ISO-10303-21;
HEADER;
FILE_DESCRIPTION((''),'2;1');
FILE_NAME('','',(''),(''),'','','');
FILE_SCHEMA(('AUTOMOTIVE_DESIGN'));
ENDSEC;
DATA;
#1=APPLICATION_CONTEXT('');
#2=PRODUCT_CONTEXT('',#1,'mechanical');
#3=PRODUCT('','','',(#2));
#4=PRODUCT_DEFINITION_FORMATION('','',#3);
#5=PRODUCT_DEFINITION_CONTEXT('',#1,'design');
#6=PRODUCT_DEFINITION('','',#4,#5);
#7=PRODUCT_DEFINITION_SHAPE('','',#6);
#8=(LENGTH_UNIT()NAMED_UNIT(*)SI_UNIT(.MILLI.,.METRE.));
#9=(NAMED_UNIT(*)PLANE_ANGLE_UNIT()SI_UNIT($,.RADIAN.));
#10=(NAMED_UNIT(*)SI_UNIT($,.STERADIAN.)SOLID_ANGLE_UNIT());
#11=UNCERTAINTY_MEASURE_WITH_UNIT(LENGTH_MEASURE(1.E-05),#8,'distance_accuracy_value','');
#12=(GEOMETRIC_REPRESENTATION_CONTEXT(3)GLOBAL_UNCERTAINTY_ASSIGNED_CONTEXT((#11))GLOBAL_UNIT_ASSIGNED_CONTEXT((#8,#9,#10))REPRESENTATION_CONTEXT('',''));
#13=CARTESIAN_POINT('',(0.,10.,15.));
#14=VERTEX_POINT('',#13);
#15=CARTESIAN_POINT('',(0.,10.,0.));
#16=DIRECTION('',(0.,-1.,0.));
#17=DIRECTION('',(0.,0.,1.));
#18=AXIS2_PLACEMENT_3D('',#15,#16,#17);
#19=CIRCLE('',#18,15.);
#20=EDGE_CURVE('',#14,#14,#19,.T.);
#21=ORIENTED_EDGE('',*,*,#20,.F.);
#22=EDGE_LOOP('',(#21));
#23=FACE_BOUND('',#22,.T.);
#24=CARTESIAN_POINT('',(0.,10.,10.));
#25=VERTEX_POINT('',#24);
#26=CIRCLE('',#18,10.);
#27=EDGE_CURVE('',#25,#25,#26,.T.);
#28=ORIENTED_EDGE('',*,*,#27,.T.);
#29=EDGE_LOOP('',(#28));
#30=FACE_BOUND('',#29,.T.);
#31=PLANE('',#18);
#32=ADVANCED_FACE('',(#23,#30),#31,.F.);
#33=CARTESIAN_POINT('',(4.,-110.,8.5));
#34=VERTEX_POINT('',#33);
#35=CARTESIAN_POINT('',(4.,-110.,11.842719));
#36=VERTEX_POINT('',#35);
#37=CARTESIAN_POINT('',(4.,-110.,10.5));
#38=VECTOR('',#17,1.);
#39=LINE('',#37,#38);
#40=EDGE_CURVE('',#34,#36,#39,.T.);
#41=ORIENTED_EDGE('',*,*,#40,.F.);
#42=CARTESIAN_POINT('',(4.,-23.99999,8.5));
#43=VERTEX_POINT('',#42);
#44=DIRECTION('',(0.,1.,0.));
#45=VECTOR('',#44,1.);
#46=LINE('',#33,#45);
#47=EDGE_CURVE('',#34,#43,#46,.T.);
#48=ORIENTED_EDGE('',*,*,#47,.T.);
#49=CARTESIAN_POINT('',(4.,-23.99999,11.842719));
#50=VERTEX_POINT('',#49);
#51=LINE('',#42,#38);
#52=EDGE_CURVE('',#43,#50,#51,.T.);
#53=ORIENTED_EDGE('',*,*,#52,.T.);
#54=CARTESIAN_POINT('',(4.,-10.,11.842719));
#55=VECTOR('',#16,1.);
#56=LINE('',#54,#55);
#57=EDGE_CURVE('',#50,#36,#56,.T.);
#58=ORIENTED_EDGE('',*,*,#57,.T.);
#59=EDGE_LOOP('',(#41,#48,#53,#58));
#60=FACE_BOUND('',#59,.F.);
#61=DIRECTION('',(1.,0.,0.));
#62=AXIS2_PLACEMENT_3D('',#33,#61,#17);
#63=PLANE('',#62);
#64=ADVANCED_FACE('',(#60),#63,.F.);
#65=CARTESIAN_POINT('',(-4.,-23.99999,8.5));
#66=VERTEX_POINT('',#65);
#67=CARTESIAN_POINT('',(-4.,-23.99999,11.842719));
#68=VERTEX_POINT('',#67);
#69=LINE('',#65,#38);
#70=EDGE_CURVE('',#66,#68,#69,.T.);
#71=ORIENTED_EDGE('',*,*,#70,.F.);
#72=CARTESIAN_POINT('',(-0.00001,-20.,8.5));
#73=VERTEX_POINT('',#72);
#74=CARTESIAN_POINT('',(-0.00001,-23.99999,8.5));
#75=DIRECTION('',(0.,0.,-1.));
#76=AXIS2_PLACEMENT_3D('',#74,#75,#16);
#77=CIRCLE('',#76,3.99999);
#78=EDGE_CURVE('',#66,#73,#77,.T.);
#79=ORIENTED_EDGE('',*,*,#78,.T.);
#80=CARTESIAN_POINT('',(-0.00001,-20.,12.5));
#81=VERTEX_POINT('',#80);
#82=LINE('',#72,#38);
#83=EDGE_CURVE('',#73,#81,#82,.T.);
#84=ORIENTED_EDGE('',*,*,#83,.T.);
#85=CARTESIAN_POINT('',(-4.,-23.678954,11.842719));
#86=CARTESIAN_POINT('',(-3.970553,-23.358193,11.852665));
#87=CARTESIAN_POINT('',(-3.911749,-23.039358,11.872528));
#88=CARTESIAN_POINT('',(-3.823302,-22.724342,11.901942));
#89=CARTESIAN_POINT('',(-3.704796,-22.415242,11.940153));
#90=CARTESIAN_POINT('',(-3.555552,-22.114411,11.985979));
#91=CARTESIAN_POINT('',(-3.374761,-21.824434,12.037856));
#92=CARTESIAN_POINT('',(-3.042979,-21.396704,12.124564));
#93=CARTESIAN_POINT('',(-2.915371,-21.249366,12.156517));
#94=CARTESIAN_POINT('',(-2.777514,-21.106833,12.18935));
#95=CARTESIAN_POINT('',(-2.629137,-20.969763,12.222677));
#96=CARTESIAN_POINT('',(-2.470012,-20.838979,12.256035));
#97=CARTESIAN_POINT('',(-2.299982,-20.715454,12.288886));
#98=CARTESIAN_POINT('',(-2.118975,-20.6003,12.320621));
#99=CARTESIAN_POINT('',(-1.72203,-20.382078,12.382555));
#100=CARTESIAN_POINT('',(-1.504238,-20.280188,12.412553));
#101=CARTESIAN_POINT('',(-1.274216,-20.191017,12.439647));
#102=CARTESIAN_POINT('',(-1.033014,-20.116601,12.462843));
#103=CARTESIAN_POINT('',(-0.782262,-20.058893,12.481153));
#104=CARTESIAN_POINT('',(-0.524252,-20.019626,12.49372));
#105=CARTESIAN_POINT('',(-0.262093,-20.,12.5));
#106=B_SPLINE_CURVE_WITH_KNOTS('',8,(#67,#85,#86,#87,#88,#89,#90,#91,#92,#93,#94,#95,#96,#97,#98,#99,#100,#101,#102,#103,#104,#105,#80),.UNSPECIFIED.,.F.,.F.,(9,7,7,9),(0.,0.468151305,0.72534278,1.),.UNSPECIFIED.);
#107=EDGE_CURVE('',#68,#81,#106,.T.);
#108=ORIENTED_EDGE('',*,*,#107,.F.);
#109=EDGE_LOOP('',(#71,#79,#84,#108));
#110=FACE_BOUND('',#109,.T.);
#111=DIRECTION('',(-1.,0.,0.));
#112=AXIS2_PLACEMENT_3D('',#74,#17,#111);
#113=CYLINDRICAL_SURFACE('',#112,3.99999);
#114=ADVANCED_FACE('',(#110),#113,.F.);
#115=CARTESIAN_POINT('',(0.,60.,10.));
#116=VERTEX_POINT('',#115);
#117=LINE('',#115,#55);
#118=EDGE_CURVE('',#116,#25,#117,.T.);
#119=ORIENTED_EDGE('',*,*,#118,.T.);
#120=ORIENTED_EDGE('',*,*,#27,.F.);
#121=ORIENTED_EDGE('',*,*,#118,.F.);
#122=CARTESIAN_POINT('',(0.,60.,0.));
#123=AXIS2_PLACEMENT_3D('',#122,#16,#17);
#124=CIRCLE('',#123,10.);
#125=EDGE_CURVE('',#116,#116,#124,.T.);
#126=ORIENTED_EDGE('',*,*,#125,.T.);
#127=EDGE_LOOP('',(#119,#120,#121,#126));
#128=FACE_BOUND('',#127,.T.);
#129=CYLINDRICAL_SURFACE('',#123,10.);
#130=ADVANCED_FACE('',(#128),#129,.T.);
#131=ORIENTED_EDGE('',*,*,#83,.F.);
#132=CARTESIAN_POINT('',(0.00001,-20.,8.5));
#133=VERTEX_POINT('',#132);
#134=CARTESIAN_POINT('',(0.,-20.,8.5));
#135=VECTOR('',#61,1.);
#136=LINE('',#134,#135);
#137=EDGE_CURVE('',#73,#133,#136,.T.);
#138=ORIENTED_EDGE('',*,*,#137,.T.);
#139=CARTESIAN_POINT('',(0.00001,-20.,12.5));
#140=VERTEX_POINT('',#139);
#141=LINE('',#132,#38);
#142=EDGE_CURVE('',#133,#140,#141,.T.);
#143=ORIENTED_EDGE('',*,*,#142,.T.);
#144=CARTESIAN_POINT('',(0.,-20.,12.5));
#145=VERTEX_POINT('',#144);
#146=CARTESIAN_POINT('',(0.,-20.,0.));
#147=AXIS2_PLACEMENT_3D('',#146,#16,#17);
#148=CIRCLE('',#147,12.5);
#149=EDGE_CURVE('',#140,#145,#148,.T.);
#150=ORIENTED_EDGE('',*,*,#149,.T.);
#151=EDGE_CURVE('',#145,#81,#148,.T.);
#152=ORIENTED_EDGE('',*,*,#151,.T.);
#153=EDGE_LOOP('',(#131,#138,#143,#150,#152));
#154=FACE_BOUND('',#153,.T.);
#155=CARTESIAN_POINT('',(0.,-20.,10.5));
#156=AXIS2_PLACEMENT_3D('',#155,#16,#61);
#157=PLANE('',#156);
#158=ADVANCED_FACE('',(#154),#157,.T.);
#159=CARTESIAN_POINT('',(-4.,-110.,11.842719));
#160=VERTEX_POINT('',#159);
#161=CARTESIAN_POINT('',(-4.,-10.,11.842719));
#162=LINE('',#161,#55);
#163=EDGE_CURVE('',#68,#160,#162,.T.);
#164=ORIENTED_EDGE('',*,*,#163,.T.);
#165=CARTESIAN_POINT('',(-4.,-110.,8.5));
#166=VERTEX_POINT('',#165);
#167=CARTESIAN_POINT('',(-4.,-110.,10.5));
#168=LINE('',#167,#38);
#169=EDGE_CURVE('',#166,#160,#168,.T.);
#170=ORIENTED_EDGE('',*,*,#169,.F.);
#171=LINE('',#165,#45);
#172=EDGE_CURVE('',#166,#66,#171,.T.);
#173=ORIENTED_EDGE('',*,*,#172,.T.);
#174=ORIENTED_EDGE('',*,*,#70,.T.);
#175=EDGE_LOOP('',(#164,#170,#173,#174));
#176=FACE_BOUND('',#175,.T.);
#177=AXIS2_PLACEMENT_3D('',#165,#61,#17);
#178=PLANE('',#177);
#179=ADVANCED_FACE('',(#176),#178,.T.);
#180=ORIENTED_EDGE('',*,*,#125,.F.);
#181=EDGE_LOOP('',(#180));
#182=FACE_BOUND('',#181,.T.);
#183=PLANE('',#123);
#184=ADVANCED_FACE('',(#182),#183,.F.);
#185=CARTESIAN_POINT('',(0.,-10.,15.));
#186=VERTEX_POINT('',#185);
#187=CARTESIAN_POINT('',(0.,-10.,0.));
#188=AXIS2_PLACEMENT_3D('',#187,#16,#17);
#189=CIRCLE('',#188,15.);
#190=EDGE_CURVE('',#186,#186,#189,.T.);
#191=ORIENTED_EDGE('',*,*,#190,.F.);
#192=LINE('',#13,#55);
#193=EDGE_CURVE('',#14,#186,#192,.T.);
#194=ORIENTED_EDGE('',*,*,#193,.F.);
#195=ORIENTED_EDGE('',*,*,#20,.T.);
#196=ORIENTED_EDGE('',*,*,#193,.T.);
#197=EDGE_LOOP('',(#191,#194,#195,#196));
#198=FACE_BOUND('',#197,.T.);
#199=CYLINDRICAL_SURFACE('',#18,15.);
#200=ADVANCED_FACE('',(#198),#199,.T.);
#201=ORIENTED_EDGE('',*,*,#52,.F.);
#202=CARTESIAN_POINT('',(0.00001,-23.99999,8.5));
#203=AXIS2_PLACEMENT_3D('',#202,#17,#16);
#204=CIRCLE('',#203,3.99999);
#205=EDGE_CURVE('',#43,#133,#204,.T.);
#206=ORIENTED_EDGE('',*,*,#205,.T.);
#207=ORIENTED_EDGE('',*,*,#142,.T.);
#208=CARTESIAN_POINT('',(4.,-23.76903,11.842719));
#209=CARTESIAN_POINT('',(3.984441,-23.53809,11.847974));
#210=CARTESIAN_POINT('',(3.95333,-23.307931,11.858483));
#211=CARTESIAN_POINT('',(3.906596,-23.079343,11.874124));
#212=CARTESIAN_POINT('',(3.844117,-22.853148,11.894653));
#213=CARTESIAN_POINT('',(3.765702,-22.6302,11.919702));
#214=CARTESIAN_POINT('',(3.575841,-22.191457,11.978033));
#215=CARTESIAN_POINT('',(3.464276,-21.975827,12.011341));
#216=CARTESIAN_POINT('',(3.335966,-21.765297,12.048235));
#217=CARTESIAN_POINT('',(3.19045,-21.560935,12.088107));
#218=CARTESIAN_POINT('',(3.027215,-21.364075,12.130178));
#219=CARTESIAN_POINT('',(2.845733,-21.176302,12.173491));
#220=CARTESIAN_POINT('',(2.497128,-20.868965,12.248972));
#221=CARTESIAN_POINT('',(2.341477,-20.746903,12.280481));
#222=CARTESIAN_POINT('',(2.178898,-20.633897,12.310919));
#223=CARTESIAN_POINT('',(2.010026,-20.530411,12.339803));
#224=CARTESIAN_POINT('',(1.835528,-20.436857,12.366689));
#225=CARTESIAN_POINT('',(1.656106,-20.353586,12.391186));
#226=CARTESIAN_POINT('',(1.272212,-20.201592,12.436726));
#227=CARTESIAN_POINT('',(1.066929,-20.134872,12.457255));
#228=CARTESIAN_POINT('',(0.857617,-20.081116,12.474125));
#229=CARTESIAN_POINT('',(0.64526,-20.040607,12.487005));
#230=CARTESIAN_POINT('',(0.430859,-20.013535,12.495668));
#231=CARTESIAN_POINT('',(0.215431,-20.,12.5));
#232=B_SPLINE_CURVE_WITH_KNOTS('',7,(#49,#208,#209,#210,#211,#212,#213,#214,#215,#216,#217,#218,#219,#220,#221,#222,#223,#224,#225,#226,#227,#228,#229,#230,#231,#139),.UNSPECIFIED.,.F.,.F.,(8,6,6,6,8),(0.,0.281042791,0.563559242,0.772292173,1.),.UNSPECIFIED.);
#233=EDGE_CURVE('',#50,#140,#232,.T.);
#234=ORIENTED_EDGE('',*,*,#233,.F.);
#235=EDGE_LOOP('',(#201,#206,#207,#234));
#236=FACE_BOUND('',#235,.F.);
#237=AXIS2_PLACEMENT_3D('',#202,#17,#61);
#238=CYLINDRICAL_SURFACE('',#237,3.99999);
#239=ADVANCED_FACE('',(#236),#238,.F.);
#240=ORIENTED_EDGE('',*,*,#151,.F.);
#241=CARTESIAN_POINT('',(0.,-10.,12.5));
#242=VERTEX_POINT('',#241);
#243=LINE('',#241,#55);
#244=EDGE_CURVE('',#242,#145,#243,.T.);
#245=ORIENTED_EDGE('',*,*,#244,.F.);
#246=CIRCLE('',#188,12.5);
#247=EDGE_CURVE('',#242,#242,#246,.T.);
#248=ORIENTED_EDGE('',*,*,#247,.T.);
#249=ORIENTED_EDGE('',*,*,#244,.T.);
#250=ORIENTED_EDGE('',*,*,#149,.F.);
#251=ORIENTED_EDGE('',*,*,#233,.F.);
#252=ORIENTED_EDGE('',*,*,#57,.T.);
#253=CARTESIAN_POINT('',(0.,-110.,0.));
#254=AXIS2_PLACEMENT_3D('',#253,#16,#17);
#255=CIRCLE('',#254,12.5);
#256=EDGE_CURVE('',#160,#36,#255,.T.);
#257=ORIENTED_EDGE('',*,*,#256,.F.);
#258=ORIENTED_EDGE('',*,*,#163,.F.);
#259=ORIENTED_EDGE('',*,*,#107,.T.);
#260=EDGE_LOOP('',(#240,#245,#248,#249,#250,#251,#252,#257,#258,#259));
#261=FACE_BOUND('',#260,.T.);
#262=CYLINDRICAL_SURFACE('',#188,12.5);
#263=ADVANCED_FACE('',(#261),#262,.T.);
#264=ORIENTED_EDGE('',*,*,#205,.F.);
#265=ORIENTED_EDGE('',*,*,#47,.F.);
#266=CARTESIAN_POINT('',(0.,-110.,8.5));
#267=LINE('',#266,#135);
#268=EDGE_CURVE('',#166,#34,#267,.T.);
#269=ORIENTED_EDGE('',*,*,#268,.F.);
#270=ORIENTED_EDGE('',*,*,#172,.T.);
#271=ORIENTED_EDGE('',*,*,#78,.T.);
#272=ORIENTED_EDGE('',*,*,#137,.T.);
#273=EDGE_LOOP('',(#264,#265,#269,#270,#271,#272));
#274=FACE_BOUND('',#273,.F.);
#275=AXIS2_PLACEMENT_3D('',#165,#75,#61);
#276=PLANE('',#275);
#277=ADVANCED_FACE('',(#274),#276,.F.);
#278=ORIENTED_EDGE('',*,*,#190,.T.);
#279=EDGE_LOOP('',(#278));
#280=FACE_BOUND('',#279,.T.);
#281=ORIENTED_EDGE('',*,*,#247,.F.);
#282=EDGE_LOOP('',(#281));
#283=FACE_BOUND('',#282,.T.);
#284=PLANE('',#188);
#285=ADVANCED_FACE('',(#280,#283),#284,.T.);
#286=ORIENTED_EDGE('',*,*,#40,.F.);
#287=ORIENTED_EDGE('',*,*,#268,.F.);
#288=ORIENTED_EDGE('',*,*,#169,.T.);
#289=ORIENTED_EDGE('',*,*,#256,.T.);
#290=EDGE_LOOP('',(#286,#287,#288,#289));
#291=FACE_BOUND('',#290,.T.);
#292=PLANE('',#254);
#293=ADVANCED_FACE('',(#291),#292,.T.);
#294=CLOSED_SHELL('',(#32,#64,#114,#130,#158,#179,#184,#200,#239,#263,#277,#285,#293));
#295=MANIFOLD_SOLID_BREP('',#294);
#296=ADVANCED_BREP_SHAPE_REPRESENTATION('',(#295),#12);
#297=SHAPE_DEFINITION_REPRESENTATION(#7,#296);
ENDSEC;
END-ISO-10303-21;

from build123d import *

# Parameters (mm, degrees)
F2_W     = 8
F2_H     = 4
F3_DEPTH = 90
F4_R     = 3.99999


# Not quite as in the source:
# - a fillet or chamfer is up to 0.001 mm smaller than in the source, because OpenCascade refuses the exact size


with BuildPart() as f1:
    # F0 (on Right) → F1 (revolve)
    with BuildSketch(Plane.YZ):
        Polygon((-110, 12.5), (-110, 0), (60, 0), (60, 10), (10, 10), (10, 15), (-10, 15), (-10, 12.5), align=None)
    revolve(axis=Axis((0, -25, 0), (0, -1, 0)))

    # F2 (on face) → F3 (cut)
    with BuildSketch(Plane.XZ.offset(110)):
        with Locations((0, 10.5)):
            Rectangle(F2_W, F2_H)
    extrude(amount=-F3_DEPTH, mode=Mode.SUBTRACT)

    # F4 (radius 4 in the source; OpenCascade refuses exactly that, so slightly less here)
    f4_edges = [f1.edges().sort_by_distance(p)[0] for p in [
        (-4, -20, 10.17136),
        (4, -20, 10.17136),
    ]]
    fillet(f4_edges, radius=F4_R)


solid = f1.part
